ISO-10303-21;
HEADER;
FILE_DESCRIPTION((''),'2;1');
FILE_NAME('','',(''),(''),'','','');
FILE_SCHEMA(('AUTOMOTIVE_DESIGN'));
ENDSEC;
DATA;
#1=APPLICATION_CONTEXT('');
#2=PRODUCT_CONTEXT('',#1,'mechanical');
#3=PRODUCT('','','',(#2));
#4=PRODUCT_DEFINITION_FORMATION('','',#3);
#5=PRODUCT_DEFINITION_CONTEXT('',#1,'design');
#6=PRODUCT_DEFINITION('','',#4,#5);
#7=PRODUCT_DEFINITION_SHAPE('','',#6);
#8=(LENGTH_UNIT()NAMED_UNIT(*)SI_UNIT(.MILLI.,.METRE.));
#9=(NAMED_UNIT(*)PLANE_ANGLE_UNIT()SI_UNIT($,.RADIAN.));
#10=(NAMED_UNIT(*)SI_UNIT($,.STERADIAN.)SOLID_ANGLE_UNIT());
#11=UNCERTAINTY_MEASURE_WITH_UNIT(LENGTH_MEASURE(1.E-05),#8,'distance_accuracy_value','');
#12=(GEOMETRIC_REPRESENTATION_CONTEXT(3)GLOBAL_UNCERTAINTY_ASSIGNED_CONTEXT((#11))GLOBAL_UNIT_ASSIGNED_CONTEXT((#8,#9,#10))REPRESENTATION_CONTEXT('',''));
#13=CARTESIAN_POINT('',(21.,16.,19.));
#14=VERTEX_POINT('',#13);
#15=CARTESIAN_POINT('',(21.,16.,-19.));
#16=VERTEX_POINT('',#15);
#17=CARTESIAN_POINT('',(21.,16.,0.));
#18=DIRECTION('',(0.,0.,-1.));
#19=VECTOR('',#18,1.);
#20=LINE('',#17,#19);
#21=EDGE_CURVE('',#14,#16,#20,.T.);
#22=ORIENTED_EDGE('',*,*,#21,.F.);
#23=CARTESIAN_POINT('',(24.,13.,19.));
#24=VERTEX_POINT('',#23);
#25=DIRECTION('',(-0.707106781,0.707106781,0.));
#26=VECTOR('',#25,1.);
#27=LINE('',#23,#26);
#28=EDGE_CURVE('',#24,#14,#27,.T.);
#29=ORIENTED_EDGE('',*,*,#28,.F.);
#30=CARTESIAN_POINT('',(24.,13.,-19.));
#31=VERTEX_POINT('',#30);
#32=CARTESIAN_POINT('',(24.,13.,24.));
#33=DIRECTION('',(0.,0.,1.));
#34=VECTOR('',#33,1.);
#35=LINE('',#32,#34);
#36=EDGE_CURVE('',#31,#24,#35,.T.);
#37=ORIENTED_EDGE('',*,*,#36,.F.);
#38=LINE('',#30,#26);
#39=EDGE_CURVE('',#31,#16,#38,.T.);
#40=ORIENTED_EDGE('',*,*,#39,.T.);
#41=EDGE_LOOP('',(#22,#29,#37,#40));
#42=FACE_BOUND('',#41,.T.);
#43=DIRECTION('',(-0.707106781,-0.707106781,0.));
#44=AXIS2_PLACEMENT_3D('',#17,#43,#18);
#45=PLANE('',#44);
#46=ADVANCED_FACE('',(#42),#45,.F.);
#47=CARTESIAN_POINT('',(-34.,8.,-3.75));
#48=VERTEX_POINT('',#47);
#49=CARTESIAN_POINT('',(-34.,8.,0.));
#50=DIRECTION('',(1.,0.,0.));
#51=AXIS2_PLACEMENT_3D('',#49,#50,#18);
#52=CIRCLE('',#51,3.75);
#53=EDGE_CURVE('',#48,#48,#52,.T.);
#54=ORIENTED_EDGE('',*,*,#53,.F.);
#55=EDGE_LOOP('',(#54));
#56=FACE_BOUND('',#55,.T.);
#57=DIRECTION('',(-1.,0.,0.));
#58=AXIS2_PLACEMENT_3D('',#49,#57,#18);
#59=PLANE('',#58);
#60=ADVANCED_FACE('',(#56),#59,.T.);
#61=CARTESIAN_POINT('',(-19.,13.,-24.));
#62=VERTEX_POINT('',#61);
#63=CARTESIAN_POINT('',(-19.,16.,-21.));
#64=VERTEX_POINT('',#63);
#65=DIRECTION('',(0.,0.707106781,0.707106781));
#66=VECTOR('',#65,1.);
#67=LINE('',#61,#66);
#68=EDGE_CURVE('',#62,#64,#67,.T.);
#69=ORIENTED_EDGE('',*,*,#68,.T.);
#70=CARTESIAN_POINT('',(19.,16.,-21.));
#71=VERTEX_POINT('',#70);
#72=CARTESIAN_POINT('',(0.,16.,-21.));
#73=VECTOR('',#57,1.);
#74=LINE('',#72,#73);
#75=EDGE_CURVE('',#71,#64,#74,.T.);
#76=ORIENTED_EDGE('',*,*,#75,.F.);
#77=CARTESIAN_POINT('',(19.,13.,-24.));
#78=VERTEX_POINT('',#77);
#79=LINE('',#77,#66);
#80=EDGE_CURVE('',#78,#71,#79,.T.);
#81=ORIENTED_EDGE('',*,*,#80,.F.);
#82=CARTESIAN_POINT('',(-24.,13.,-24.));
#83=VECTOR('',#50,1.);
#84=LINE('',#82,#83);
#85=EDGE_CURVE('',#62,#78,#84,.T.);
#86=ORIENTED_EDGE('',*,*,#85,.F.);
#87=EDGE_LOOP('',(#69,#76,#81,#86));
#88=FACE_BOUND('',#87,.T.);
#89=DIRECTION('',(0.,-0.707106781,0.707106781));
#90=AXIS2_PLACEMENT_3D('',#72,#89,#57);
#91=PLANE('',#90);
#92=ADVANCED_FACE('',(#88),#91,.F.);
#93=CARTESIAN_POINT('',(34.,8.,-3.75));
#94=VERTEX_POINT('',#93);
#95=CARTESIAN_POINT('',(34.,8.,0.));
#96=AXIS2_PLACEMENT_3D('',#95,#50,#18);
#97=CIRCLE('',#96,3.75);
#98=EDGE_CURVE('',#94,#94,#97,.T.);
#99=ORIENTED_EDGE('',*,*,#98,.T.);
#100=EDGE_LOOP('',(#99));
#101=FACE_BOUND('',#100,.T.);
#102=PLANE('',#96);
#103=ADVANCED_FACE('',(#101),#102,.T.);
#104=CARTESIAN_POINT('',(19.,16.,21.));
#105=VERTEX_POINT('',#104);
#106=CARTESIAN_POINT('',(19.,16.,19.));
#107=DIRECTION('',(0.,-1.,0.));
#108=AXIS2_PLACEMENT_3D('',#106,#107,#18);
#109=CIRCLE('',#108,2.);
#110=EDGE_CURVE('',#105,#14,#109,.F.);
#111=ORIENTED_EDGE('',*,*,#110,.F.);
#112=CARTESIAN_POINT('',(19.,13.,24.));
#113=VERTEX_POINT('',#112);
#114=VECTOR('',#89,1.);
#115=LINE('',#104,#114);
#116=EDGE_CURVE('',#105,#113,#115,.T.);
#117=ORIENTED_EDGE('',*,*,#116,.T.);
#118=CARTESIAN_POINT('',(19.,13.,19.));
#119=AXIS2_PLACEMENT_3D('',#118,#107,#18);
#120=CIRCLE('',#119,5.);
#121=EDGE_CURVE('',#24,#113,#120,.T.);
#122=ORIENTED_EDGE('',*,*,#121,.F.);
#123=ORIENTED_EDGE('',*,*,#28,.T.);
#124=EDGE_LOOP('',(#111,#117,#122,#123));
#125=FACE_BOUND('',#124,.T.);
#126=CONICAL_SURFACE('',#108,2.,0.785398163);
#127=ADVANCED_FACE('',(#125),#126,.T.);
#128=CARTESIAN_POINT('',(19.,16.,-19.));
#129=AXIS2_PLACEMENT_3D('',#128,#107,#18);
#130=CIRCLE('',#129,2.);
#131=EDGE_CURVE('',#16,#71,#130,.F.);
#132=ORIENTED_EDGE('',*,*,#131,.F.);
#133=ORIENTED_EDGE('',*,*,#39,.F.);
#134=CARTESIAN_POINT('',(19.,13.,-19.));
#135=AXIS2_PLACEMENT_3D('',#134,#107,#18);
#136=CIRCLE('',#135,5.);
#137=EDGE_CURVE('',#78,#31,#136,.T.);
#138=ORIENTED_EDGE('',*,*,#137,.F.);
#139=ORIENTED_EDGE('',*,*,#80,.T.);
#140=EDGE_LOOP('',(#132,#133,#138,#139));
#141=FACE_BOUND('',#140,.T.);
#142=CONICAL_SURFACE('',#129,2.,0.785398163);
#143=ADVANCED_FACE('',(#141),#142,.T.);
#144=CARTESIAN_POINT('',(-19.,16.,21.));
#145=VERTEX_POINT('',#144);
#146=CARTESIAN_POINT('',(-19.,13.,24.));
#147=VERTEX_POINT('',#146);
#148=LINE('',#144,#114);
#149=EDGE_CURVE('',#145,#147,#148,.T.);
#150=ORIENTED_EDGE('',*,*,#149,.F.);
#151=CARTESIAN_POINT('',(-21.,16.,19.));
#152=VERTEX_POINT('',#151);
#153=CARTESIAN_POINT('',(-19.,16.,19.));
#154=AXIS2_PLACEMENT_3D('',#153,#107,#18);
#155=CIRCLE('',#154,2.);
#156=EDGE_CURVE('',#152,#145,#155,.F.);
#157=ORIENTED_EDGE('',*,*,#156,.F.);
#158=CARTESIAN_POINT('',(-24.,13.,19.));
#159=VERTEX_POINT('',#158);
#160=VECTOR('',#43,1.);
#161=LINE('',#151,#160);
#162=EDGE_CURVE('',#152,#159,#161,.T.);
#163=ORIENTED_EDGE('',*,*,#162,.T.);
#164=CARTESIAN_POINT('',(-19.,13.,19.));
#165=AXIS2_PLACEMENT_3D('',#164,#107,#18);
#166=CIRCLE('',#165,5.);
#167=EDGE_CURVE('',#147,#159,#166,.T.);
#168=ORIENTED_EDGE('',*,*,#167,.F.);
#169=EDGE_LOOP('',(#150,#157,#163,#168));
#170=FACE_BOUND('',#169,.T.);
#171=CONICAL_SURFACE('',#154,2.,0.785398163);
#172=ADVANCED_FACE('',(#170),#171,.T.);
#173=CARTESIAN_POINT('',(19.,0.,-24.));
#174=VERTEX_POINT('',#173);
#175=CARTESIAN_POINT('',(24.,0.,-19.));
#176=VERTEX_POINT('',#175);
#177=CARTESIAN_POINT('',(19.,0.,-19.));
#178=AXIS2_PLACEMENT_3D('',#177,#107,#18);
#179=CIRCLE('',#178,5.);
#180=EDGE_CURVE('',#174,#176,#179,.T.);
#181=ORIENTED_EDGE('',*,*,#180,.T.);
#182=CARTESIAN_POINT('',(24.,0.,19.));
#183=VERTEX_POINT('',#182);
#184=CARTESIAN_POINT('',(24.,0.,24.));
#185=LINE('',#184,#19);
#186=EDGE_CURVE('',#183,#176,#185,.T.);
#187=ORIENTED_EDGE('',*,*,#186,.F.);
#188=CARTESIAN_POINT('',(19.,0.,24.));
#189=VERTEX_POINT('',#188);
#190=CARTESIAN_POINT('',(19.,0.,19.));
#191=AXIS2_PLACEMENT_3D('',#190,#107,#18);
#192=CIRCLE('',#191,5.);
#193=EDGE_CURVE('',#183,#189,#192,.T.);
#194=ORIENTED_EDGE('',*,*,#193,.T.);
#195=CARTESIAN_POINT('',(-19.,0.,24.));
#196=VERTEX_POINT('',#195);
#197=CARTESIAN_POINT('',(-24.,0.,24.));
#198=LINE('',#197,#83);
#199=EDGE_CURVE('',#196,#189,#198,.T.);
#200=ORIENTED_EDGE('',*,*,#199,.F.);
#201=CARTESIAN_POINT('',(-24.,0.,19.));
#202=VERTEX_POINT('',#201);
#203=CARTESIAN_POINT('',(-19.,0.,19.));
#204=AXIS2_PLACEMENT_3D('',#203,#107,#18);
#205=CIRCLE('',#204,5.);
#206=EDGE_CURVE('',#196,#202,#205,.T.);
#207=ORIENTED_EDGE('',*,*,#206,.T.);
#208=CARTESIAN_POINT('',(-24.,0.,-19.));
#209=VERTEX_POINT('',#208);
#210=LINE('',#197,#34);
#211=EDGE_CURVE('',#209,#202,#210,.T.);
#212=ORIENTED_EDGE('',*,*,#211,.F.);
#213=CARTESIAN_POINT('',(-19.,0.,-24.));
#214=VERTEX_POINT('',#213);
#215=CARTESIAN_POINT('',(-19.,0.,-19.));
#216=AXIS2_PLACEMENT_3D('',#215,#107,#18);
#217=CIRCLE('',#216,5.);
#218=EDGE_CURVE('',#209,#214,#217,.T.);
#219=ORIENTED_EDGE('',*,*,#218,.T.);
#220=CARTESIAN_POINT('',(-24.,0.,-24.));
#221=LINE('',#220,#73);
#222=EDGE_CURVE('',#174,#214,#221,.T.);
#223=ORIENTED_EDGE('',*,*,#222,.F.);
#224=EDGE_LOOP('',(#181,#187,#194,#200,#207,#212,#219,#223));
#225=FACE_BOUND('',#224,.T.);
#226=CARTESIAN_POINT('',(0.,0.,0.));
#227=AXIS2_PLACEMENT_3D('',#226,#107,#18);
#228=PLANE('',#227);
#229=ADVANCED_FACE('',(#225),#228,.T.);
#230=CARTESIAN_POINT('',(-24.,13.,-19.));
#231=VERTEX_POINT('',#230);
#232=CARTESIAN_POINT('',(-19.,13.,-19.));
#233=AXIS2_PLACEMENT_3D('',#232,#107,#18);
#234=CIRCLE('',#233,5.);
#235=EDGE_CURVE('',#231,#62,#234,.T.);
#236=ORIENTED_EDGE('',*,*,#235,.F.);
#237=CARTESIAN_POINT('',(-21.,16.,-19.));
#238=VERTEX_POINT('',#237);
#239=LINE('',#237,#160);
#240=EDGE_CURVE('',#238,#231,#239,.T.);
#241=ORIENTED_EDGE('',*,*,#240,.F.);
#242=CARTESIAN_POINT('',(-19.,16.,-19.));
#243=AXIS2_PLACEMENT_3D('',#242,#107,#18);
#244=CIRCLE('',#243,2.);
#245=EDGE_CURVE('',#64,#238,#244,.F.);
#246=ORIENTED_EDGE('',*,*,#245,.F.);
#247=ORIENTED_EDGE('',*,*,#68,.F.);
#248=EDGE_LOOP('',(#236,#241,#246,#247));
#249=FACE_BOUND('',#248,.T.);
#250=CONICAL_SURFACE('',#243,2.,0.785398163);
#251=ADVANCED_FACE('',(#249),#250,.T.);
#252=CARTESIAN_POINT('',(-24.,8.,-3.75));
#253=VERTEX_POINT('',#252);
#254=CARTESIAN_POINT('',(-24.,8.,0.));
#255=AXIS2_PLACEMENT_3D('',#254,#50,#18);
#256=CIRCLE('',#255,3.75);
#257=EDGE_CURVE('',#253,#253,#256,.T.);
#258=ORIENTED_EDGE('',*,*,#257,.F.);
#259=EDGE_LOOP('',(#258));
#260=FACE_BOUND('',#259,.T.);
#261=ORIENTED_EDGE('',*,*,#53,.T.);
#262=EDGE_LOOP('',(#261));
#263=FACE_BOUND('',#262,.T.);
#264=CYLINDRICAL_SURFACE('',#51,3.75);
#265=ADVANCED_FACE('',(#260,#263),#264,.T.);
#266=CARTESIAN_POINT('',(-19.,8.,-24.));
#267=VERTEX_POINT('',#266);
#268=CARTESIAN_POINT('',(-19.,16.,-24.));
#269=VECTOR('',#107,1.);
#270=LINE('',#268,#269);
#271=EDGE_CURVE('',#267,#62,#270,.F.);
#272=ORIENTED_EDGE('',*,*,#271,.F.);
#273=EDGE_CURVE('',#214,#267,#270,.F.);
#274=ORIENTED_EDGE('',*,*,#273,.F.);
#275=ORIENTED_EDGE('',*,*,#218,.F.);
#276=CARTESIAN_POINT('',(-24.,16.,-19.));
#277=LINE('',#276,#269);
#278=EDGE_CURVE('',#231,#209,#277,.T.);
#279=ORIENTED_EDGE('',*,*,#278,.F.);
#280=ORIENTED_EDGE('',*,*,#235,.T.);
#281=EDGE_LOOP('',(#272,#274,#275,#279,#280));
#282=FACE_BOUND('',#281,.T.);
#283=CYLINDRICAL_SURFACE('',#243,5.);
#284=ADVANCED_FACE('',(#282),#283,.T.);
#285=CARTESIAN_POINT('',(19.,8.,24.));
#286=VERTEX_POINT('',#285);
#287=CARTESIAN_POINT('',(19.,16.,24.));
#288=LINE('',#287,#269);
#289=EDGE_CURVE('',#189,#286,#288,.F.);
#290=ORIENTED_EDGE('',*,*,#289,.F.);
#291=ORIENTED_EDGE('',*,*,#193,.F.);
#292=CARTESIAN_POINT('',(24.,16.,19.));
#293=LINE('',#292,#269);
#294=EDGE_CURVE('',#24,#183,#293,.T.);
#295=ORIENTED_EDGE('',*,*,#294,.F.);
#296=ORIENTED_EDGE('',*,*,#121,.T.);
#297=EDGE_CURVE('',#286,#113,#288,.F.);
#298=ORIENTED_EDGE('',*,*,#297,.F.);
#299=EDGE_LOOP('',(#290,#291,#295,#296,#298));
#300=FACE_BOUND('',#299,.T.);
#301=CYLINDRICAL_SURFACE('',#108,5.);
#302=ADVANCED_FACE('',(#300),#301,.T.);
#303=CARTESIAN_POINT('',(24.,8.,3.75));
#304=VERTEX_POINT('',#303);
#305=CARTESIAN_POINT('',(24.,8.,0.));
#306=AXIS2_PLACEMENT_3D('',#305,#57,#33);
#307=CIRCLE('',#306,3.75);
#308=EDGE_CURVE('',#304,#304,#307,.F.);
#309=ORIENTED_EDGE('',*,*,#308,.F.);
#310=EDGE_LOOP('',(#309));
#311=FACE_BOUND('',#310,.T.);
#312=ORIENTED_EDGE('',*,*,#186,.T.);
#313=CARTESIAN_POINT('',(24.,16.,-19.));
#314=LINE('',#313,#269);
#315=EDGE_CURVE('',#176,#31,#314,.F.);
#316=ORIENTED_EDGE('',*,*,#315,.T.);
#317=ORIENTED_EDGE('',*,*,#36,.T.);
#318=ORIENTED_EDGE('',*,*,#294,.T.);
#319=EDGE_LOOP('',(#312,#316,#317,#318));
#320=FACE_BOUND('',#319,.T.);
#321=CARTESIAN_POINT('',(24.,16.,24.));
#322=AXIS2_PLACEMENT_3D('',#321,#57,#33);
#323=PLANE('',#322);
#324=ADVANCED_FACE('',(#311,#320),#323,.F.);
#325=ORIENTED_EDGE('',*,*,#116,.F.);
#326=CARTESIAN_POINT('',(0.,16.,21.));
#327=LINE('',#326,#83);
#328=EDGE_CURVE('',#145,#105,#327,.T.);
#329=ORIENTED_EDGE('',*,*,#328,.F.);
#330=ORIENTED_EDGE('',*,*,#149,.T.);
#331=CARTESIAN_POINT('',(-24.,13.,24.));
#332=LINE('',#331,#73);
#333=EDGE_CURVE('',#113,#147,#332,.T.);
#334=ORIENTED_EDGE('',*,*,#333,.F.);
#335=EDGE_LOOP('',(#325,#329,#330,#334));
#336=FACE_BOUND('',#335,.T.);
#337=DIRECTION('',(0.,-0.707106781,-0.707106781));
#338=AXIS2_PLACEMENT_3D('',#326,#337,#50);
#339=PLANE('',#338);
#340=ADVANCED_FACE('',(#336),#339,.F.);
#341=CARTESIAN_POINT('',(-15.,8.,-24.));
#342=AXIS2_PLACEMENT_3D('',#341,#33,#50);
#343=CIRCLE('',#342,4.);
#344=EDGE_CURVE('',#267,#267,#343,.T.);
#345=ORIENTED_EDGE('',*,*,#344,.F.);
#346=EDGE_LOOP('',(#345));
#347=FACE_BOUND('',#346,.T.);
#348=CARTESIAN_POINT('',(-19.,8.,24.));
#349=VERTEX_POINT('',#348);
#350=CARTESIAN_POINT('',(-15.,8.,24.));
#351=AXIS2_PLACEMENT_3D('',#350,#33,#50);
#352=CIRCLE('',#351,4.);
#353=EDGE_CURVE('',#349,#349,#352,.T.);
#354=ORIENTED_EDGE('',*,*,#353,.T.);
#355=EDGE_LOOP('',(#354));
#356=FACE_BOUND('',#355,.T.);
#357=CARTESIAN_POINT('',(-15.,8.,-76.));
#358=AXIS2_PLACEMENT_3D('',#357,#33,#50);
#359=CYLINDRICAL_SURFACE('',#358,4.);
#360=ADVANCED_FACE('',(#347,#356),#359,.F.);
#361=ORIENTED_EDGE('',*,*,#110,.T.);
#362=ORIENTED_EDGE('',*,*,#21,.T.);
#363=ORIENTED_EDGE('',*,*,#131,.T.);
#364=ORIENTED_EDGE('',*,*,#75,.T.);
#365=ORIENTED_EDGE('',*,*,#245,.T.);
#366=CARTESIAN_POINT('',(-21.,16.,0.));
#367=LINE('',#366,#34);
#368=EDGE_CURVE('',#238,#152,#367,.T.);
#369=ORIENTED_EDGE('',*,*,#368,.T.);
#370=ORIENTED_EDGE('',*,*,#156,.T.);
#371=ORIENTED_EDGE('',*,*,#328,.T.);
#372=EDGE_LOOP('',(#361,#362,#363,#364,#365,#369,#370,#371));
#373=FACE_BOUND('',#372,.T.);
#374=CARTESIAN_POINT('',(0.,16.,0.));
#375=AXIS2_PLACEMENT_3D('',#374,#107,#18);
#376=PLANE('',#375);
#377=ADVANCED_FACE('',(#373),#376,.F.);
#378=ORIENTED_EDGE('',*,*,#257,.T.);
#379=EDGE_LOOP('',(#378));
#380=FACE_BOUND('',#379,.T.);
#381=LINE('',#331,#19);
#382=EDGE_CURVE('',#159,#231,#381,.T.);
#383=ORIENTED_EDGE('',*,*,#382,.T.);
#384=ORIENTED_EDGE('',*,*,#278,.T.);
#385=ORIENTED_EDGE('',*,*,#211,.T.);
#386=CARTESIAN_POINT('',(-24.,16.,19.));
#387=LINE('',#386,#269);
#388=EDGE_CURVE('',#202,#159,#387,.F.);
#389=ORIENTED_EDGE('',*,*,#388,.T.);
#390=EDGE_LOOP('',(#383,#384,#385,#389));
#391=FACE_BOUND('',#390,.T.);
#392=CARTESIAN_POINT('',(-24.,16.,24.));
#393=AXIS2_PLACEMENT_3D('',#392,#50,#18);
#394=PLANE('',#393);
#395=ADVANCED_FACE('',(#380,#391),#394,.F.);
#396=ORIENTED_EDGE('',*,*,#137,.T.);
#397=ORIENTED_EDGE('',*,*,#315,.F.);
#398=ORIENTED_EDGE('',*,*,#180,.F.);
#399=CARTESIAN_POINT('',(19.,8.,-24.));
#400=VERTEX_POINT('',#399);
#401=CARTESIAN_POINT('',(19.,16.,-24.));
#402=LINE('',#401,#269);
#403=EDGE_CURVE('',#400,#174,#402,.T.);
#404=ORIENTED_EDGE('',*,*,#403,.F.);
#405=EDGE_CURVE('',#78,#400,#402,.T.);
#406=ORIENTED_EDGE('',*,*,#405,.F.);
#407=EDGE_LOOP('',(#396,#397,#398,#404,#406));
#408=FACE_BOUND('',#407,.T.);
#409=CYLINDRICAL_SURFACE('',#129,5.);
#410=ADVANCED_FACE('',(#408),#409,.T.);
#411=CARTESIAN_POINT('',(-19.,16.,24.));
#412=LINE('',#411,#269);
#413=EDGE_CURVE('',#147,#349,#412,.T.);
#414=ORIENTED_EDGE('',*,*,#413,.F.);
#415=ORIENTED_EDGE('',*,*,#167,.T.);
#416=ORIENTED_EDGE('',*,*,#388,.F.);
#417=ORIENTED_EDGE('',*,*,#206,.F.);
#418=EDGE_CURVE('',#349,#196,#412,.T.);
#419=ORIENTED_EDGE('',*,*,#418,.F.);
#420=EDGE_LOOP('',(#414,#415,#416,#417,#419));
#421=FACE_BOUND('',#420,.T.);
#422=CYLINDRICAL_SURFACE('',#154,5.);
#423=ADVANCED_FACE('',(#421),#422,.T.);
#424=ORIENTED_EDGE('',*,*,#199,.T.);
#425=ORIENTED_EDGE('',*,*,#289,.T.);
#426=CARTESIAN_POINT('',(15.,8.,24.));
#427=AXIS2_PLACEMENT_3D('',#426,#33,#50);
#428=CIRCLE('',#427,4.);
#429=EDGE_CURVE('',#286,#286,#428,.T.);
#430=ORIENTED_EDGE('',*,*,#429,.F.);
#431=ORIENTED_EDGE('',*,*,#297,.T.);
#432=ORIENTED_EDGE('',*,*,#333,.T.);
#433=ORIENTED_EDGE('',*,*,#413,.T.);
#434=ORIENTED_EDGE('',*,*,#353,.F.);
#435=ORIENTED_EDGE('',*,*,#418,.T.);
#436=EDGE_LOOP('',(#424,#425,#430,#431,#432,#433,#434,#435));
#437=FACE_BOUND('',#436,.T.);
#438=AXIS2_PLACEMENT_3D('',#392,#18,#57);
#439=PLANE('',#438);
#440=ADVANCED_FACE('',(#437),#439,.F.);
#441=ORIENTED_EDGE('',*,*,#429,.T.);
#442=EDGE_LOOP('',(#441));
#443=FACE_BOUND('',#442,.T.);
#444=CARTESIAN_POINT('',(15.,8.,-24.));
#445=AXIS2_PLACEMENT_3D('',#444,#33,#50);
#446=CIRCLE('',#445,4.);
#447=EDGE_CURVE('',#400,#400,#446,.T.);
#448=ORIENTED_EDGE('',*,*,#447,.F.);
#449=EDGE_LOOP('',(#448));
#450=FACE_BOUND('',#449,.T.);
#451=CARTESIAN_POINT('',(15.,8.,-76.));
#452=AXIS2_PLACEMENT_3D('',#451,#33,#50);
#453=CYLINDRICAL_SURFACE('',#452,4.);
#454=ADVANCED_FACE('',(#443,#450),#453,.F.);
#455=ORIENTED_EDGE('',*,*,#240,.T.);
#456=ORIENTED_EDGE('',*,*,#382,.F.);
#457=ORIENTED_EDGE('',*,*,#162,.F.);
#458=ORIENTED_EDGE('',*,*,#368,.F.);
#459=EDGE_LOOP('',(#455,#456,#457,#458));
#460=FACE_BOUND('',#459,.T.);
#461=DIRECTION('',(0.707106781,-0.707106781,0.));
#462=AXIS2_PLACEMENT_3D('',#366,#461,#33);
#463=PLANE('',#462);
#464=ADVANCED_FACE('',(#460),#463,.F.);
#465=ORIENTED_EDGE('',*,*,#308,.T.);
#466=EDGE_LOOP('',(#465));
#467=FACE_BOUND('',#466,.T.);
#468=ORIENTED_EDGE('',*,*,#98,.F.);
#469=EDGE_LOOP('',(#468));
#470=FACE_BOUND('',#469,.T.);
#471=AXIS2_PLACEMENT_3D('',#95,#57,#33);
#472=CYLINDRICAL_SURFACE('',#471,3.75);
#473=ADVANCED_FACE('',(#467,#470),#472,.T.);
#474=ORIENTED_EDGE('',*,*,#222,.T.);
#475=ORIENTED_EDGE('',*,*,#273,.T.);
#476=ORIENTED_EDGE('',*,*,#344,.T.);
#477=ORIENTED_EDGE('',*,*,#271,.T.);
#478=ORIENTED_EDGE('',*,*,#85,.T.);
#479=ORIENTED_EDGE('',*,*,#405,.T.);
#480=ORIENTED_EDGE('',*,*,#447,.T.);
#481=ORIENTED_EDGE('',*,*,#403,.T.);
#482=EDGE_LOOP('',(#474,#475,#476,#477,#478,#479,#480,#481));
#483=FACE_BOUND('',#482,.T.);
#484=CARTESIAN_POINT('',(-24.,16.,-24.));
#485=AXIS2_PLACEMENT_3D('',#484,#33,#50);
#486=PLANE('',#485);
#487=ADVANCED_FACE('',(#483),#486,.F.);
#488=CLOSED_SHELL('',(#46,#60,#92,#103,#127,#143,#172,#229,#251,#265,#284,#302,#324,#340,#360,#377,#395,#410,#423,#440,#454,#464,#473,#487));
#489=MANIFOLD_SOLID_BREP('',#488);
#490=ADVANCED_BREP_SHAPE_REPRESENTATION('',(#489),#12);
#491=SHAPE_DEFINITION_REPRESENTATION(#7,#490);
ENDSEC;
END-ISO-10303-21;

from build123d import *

# Parameters (mm, degrees)
SKETCH1_W           = 48
SKETCH1_H           = 48
BOSS_EXTRUDE1_DEPTH = 16
SKETCH2_R           = 4
CUT_EXTRUDE1_DEPTH  = 100
SKETCH3_R           = 3.75
BOSS_EXTRUDE2_DEPTH = 10
FILLET1_R           = 5
CHAMFER1_SIZE       = 3


with BuildPart() as part:
    # Sketch1 → Boss-Extrude1 (new body)
    with BuildSketch(Plane(origin=(0, 0, 0), x_dir=(1, 0, 0), z_dir=(0, 1, 0))):
        Rectangle(SKETCH1_W, SKETCH1_H)
    extrude(amount=BOSS_EXTRUDE1_DEPTH)

    # Sketch2 → Cut-Extrude1 (cut)
    with BuildSketch(Plane.XY.offset(24)):
        with Locations((-15, 8)):
            Circle(SKETCH2_R)
        with Locations((15, 8)):
            Circle(SKETCH2_R)
    extrude(amount=-CUT_EXTRUDE1_DEPTH, mode=Mode.SUBTRACT)

    # Sketch3 → Boss-Extrude2 (add)
    with BuildSketch(Plane(origin=(24, 0, 0), x_dir=(0, 0, -1), z_dir=(1, 0, 0))):
        with Locations(Location((0, 8, 0), (0, 0, 180))):
            Circle(SKETCH3_R)
    boss_extrude2 = extrude(amount=BOSS_EXTRUDE2_DEPTH)

    # Mirror1: Boss-Extrude2 across plane
    add(boss_extrude2.mirror(Plane(origin=(0, 0, 0), x_dir=(0, 0, 1), z_dir=(1, 0, 0))))

    # Fillet1
    fillet1_edges = [part.edges().sort_by_distance(p)[0] for p in [
        (24, 8, 24),
        (-24, 8, 24),
        (-24, 8, -24),
        (24, 8, -24),
    ]]
    fillet(fillet1_edges, radius=FILLET1_R - 0.0001)  # a hair under: the kernel refuses the full size

    # Chamfer1
    chamfer1_edges = [part.edges().sort_by_distance(p)[0] for p in [
        (0, 16, -24),
        (24, 16, 0),
        (-24, 16, 0),
        (0, 16, 24),
        (-22.535563195, 16, 22.535563195),
        (-22.535563195, 16, -22.535563195),
        (22.535563195, 16, 22.535563195),
        (22.535563195, 16, -22.535563195),
    ]]
    chamfer(chamfer1_edges, length=CHAMFER1_SIZE)


solid = part.part
